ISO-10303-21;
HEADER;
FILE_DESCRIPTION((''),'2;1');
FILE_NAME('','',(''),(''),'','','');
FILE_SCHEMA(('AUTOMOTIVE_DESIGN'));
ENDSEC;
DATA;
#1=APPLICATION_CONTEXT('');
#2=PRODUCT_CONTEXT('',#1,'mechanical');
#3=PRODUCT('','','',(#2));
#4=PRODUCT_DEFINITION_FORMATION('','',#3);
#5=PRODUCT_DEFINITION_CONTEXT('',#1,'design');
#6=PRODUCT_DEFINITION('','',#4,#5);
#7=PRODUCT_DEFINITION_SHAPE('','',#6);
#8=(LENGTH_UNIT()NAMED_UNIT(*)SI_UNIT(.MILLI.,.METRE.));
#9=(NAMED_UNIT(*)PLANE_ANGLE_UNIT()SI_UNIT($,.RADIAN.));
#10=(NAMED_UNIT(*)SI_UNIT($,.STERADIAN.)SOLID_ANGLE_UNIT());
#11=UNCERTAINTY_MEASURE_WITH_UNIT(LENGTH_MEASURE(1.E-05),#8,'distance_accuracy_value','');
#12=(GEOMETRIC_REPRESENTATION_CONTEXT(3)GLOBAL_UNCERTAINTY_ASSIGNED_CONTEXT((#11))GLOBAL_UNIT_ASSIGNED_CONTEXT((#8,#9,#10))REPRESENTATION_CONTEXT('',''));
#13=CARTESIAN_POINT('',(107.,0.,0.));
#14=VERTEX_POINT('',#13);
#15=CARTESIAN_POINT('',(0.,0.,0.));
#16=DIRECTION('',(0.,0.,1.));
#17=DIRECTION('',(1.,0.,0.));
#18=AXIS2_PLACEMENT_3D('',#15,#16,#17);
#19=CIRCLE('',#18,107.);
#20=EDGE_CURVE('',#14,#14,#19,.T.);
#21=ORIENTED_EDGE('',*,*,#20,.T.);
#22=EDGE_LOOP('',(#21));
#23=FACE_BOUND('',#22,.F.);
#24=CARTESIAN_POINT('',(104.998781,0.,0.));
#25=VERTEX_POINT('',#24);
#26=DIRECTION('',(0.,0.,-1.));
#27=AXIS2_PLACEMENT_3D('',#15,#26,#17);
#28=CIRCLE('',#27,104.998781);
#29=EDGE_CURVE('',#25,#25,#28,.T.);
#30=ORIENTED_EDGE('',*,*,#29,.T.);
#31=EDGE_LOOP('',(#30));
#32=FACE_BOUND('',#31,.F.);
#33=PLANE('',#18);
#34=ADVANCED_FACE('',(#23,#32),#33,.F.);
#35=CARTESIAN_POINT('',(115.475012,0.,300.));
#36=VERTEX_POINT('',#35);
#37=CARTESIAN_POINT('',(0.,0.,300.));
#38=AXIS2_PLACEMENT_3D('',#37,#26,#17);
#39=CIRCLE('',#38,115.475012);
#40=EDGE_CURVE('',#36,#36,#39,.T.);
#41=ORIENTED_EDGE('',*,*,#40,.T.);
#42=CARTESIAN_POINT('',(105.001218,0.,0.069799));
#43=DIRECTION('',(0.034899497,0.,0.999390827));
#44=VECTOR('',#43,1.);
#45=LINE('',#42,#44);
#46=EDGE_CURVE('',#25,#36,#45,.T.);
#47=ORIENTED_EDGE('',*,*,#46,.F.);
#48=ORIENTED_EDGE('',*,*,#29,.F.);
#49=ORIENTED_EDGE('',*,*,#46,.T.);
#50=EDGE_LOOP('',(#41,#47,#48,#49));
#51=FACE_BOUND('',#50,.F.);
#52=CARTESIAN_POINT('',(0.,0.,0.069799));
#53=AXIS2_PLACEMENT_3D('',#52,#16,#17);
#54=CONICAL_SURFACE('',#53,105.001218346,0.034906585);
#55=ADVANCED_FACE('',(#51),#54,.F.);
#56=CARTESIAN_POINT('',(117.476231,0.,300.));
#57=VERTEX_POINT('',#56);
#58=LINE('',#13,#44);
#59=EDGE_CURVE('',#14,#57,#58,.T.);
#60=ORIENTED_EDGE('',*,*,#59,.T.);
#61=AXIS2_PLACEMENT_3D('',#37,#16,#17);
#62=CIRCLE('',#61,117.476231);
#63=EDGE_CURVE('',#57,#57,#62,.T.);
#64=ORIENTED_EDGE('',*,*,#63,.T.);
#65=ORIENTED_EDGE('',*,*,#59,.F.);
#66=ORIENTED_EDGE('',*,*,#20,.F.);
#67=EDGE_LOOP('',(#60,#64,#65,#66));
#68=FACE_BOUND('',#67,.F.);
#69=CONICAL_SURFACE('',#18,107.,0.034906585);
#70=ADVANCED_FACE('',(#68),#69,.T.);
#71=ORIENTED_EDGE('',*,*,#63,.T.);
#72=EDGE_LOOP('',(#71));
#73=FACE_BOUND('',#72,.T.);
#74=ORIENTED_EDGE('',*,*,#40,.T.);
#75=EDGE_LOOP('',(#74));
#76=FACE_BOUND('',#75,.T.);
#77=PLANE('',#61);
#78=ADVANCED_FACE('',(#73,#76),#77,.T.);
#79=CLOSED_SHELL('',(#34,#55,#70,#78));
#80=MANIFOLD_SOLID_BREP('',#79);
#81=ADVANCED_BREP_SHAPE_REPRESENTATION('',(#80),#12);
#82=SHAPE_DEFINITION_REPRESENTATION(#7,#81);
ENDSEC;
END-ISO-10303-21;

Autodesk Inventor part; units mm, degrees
ref_plane "YZ Plane" through (0, 0, 0) normal (1, 0, 0) x (0, 1, 0)
ref_plane "XZ Plane" through (0, 0, 0) normal (0, 1, 0) x (-1, 0, 0)
ref_plane "XY Plane" through (0, 0, 0) normal (0, 0, 1) x (1, 0, 0)
sketch "Skizze1" plane through (0, 0, 0) normal (0, 0, 1) x (1, 0, 0)
  circle A0 centre (0, 0) radius 105
  circle A1 centre (0, 0) radius 107
  dimension "d0" = 210
  dimension "d1" = 2
extrude "Extrusion1" add sketch "Skizze1" along normal blind 300 draft 2 contours A0 | A1
shell "Wandung1" thickness 2 removed faces 2 at (-20.6752, -47.001, 300) at (-45.8013, 28.9537, 0)
properties part number "Holder"
